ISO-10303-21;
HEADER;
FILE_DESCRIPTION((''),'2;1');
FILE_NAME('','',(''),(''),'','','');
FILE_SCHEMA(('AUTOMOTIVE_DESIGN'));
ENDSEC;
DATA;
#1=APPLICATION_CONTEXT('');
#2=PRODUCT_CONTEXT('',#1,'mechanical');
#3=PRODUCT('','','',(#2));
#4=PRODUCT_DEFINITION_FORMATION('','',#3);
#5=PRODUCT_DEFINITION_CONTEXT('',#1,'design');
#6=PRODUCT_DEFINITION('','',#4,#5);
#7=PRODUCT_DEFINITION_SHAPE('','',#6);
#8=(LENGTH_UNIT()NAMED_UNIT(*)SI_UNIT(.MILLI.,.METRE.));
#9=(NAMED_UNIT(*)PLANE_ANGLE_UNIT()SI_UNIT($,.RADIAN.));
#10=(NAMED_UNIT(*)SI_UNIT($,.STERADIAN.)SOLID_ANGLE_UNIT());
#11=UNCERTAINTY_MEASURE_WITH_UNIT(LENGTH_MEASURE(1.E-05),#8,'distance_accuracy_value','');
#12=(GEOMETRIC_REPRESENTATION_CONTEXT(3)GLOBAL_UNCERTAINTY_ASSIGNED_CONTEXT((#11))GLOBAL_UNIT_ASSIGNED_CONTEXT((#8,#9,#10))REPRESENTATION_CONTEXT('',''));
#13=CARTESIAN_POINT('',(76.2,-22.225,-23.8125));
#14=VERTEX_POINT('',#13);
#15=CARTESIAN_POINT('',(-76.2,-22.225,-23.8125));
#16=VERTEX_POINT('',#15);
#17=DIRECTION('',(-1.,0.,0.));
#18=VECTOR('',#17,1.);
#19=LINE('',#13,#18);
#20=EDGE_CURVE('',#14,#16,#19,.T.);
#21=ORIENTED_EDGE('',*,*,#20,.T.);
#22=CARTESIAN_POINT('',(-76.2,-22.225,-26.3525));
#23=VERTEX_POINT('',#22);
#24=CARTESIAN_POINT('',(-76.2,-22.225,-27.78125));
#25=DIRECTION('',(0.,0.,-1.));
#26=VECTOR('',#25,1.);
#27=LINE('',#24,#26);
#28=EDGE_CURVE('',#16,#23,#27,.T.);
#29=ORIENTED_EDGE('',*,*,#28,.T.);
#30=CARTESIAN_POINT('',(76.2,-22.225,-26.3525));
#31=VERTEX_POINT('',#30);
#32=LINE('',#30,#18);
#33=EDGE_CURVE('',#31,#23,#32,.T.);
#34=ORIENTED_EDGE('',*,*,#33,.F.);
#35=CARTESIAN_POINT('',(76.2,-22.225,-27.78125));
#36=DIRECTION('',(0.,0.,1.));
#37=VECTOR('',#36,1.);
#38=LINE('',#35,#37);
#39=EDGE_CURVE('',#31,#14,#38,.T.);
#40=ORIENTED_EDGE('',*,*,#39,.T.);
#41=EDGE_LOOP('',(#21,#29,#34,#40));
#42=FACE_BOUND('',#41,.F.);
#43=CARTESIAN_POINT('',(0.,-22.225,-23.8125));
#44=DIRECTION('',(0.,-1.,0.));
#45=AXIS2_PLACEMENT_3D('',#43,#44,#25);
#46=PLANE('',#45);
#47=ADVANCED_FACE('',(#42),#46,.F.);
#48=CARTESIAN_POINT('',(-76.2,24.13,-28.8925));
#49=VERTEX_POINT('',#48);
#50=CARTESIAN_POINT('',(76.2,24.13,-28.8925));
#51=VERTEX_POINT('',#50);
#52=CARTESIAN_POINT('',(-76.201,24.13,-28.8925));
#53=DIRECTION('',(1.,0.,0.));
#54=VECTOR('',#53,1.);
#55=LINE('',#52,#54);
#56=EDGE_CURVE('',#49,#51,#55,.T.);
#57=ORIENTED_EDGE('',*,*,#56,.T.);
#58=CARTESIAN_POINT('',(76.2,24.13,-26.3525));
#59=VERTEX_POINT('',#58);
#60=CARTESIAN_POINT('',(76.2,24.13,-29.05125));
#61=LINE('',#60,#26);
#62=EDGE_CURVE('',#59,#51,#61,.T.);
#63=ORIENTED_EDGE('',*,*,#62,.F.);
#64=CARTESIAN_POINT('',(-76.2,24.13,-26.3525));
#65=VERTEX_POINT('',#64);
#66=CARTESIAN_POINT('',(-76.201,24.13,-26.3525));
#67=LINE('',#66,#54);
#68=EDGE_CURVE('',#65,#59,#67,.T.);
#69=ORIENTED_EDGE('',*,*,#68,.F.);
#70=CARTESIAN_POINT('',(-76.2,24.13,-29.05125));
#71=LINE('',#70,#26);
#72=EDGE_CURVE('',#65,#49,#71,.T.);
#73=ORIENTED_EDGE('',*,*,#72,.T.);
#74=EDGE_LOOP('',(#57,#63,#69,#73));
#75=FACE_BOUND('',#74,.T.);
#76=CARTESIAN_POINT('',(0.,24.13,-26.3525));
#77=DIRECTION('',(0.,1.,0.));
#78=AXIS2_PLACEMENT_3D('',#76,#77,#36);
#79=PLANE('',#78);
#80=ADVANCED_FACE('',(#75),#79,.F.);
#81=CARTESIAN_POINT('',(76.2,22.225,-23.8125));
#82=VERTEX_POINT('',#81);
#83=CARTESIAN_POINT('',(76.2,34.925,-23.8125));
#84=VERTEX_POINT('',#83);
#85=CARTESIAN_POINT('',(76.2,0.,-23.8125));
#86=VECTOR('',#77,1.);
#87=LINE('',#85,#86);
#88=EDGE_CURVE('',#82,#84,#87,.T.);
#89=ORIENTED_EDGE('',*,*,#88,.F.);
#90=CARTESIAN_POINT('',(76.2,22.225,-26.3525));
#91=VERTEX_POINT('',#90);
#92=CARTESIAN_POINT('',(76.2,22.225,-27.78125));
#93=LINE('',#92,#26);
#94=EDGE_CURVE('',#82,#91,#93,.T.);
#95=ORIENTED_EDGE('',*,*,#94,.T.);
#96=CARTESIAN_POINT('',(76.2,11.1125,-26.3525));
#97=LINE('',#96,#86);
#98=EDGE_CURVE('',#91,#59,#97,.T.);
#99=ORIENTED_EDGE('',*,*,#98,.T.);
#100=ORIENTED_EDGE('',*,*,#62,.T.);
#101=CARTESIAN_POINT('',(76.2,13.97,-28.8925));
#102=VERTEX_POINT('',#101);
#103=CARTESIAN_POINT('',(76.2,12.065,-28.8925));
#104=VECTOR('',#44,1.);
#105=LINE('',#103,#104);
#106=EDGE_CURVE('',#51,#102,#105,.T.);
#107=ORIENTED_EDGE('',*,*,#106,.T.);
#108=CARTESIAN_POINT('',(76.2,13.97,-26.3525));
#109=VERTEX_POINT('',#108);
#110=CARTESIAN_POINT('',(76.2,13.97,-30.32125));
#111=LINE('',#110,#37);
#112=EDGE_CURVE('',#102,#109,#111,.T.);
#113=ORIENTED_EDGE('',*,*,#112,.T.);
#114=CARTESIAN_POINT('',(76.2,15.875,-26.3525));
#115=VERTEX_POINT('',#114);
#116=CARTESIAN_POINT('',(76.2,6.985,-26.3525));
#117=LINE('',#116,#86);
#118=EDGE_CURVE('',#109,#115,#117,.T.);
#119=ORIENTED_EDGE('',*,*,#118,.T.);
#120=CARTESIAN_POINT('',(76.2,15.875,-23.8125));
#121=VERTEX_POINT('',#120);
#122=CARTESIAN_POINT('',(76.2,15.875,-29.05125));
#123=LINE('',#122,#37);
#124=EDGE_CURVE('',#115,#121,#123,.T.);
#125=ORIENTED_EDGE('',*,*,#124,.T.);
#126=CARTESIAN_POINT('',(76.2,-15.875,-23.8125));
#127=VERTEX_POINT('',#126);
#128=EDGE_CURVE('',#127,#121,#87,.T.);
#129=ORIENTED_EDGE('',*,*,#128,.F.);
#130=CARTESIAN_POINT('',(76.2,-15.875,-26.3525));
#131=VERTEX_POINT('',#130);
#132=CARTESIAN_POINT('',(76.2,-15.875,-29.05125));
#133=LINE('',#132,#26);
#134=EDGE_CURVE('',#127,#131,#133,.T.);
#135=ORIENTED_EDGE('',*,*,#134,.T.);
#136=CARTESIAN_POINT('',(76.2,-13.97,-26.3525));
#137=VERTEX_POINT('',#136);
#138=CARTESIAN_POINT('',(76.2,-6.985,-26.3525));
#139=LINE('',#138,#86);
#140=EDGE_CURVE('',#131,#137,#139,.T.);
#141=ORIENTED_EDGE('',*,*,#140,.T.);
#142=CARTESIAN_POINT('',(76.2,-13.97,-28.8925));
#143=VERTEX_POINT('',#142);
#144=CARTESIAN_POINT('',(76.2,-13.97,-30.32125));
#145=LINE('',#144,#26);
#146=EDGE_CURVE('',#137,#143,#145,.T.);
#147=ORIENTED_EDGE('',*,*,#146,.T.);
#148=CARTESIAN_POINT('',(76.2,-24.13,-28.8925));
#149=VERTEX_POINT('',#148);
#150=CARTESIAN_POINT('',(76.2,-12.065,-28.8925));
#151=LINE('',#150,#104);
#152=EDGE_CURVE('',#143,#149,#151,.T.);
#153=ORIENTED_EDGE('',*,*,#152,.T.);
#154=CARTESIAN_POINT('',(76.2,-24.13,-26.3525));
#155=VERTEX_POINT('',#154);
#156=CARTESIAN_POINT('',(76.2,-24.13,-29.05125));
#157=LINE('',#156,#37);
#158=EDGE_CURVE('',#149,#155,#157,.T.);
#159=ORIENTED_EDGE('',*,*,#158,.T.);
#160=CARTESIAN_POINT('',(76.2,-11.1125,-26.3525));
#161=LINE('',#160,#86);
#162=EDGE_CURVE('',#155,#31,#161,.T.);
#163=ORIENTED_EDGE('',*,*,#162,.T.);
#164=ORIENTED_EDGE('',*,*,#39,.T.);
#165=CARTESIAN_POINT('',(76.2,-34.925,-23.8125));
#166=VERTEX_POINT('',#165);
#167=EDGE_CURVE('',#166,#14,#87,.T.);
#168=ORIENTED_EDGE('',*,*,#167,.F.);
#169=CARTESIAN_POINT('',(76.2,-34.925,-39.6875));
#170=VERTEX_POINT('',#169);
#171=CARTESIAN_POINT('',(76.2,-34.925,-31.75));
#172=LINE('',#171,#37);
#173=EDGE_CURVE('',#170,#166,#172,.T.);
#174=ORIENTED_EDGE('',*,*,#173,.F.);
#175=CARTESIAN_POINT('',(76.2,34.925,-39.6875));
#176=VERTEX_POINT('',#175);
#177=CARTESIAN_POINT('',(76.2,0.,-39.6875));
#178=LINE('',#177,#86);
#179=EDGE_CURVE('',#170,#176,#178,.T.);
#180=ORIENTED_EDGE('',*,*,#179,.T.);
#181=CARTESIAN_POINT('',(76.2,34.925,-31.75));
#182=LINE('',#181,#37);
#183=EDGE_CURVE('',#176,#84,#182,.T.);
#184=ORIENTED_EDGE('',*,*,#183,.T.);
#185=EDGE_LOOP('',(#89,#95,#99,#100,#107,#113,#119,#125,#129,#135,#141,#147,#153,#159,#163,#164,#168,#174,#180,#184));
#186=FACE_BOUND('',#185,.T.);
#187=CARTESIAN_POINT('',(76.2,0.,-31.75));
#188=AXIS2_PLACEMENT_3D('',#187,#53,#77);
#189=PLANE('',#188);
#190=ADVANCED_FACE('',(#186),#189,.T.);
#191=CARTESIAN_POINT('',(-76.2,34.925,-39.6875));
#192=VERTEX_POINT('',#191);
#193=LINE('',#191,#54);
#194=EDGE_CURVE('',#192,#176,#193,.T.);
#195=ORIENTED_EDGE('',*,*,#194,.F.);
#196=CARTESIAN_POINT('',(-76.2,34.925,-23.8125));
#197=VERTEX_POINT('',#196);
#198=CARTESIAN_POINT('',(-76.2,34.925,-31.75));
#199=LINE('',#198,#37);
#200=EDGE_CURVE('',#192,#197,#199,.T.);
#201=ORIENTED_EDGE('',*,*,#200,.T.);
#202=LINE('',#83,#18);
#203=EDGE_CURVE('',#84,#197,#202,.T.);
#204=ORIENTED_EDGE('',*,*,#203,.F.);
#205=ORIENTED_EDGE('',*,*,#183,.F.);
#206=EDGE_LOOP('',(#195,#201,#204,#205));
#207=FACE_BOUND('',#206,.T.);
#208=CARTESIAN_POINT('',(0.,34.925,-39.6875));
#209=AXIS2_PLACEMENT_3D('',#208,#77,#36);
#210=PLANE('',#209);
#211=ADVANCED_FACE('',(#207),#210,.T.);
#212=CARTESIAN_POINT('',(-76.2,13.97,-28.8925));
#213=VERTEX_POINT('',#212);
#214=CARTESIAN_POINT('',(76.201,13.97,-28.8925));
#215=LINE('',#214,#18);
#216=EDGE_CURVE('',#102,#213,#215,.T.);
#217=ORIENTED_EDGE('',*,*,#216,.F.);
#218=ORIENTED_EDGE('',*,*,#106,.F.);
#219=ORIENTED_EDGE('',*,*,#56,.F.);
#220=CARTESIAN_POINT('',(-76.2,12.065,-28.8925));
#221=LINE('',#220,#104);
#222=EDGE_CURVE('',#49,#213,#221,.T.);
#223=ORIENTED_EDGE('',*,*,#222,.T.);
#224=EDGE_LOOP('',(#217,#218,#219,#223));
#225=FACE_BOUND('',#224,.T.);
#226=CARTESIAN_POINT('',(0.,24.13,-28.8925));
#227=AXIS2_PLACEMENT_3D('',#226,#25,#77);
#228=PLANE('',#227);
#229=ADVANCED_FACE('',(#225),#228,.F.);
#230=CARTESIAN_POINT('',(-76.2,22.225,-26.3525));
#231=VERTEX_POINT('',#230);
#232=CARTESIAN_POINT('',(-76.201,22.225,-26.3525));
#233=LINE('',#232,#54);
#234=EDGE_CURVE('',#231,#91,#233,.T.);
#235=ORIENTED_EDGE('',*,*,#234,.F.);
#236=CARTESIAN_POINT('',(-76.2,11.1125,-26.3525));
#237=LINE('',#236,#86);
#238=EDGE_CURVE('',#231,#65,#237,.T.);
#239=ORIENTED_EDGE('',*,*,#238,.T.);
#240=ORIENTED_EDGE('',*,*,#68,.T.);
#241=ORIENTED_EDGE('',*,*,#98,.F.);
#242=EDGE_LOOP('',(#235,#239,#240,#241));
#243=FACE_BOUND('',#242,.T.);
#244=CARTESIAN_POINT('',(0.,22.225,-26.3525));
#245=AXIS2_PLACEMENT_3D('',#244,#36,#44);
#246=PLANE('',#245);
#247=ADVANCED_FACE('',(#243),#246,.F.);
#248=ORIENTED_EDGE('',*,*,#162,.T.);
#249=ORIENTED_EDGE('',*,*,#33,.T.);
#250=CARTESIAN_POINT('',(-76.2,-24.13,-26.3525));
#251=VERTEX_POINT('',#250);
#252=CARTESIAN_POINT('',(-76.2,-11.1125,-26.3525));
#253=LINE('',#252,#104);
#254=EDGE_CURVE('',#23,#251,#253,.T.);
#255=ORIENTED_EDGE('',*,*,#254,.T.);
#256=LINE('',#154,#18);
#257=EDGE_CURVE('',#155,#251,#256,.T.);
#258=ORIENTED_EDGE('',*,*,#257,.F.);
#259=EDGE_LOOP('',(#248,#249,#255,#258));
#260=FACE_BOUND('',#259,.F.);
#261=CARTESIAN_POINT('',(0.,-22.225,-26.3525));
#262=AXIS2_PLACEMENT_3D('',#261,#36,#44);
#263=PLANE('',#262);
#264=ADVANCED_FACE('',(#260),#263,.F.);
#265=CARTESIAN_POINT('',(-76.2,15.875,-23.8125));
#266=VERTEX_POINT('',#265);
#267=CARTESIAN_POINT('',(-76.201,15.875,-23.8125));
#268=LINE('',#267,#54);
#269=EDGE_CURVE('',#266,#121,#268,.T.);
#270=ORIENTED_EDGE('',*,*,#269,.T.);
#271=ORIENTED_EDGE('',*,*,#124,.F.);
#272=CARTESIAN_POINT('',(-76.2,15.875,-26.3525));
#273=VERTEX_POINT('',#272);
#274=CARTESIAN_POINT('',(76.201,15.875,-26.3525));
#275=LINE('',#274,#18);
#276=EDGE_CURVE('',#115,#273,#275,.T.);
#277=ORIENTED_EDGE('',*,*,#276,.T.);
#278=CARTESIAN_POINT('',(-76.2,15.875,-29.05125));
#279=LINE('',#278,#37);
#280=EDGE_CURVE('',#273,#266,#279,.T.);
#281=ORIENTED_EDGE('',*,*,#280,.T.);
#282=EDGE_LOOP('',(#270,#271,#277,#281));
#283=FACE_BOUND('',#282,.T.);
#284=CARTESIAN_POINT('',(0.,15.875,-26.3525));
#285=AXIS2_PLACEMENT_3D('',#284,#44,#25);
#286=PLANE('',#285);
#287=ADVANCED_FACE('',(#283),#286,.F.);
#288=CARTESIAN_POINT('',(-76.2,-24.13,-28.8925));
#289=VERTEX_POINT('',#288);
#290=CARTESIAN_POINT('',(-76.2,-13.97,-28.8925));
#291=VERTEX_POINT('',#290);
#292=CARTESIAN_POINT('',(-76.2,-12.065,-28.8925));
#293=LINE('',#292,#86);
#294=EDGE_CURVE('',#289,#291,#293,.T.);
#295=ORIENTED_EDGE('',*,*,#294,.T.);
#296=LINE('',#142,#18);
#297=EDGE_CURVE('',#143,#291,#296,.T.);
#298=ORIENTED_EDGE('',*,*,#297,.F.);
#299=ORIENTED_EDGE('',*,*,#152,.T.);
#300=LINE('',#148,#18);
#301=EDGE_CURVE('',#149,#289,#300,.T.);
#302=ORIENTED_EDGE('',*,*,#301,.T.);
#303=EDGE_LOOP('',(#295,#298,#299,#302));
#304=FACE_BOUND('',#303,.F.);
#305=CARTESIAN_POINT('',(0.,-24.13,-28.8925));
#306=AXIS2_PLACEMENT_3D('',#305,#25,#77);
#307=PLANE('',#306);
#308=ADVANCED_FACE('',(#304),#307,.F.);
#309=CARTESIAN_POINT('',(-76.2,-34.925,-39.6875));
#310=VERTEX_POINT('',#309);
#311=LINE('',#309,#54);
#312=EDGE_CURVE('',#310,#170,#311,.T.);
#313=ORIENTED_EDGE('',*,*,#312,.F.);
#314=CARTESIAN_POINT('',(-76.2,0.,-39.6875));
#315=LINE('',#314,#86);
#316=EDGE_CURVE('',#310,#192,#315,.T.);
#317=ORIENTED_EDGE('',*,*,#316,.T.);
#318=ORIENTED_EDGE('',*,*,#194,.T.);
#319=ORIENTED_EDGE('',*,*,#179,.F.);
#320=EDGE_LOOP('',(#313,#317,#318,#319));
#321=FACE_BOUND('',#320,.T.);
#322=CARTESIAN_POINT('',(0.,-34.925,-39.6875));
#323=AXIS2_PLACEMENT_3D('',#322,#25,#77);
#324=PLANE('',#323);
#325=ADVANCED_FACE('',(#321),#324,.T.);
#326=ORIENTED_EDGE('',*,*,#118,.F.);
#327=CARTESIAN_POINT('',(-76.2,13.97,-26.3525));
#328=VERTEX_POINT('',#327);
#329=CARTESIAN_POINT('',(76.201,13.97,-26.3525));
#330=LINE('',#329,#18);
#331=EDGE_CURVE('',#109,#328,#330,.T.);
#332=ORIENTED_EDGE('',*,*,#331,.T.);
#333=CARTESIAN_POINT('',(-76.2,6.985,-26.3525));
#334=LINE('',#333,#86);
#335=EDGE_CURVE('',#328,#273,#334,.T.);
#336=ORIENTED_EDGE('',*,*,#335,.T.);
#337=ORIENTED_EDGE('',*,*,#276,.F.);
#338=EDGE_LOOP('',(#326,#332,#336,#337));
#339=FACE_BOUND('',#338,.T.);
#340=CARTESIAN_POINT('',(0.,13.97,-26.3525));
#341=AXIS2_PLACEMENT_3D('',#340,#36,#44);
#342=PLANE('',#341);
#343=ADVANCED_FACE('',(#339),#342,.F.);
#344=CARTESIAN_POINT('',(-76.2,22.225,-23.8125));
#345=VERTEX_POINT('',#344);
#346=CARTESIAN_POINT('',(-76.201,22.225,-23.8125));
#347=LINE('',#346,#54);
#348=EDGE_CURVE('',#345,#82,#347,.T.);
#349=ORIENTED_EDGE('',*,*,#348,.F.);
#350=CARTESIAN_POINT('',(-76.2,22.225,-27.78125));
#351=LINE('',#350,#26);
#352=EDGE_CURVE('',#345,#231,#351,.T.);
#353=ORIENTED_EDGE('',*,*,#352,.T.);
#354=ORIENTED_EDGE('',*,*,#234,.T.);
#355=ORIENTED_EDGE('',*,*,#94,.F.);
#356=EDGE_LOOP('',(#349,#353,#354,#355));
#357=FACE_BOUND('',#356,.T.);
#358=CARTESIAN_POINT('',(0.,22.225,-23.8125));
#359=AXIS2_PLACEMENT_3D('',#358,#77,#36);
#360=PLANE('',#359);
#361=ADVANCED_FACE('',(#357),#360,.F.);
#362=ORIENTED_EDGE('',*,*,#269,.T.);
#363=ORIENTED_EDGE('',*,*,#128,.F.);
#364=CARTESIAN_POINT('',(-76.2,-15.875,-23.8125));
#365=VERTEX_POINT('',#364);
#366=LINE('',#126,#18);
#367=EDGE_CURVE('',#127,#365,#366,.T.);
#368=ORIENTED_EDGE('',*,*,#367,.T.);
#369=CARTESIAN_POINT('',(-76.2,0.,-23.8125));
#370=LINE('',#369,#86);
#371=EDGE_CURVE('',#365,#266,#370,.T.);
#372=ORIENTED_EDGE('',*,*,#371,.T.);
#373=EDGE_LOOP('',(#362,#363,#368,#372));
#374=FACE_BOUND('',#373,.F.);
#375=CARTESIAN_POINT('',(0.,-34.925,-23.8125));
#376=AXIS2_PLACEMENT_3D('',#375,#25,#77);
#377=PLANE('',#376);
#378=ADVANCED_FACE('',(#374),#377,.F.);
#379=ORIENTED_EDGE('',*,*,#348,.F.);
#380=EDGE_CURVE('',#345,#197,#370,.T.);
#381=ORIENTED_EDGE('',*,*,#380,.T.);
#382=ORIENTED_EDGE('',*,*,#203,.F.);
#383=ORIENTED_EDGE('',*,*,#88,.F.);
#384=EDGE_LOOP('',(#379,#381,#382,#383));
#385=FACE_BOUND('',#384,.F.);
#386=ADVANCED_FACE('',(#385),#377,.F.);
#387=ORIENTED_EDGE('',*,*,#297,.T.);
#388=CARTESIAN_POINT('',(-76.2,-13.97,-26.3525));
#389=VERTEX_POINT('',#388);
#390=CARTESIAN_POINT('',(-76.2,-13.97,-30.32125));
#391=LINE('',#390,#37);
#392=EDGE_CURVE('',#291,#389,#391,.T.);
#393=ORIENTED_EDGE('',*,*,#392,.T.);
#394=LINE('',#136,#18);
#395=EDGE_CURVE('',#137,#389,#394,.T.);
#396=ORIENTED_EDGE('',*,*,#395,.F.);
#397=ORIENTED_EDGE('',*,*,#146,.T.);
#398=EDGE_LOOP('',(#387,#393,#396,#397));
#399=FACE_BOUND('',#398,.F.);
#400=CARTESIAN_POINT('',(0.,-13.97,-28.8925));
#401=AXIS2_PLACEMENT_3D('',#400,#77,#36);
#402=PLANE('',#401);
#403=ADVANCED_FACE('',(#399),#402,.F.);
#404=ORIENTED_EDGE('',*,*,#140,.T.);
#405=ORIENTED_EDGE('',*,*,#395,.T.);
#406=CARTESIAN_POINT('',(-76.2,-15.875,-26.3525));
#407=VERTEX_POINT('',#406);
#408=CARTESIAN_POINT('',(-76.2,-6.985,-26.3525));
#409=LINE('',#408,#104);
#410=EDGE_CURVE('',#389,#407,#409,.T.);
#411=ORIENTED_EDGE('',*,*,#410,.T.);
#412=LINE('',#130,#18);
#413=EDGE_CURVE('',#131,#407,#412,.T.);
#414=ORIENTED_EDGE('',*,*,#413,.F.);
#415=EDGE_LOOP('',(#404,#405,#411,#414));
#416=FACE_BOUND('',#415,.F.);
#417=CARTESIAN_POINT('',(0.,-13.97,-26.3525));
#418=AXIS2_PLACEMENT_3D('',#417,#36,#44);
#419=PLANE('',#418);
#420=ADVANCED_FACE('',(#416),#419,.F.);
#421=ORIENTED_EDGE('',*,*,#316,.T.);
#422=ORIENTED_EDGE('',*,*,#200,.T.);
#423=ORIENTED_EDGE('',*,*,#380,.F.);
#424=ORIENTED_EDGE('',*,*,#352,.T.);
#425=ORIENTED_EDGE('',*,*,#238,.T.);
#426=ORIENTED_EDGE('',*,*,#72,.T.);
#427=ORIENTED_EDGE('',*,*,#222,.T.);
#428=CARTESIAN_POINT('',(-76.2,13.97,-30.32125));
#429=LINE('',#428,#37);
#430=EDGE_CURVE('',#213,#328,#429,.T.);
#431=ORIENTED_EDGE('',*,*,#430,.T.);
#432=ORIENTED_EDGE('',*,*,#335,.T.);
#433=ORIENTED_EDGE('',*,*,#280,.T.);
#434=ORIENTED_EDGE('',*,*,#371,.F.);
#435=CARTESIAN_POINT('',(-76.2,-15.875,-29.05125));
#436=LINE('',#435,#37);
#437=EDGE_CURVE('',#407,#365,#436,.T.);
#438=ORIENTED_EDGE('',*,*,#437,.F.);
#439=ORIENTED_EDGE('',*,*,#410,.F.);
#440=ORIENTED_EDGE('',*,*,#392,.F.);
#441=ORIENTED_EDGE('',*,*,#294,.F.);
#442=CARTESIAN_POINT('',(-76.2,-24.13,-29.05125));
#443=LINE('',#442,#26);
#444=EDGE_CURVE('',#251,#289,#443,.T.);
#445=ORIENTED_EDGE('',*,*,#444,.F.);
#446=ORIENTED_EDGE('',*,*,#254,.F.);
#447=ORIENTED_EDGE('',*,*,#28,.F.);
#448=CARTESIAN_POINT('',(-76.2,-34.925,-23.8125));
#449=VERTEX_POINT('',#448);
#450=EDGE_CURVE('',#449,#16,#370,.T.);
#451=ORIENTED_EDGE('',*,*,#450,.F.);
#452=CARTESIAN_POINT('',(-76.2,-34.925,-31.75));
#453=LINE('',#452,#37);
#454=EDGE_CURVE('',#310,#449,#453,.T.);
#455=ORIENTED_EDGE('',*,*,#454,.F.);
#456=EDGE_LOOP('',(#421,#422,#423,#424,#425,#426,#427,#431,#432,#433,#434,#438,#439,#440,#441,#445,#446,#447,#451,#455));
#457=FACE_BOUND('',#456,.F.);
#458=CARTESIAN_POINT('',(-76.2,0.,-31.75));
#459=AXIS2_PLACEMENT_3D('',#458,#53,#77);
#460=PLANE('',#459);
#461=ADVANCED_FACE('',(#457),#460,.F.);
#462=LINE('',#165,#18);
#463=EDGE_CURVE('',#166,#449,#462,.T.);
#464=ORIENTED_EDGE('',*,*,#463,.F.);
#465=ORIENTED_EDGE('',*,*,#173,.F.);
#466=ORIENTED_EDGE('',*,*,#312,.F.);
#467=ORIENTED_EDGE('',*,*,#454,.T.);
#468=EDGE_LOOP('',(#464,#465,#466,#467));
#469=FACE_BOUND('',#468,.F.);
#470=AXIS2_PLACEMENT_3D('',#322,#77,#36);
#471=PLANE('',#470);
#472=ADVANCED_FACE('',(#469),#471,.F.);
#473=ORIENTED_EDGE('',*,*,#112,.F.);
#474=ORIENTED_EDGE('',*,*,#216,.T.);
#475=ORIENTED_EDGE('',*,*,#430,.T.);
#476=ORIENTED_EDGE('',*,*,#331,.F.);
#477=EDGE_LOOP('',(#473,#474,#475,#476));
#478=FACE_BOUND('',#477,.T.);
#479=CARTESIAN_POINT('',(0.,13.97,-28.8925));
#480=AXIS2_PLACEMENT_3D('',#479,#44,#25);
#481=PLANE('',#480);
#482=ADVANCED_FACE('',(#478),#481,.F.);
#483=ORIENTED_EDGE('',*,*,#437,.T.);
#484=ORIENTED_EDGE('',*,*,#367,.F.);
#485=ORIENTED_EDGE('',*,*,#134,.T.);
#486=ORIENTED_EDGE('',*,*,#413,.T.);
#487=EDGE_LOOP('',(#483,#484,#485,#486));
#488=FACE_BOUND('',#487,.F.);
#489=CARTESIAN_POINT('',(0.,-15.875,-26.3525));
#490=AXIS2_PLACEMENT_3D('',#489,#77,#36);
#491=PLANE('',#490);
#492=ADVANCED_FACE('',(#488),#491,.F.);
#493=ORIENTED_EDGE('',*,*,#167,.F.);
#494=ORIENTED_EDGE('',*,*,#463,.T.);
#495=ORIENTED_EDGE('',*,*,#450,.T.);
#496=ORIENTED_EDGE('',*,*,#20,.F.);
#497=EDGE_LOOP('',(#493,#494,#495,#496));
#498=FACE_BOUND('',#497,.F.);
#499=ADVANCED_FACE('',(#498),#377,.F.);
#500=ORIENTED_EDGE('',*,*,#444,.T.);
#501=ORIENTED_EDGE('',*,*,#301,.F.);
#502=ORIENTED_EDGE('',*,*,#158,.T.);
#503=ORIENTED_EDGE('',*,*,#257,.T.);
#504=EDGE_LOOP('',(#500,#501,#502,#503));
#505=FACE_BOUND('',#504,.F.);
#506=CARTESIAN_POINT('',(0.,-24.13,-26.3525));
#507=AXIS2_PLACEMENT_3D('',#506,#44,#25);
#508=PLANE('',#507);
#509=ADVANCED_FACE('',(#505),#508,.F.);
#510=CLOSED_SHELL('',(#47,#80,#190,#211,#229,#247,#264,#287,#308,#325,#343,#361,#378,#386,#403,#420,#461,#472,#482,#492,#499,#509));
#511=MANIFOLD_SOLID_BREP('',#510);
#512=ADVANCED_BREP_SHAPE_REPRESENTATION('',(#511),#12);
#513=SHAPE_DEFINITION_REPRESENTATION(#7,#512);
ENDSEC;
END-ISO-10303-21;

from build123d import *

# Parameters (mm, degrees)
F0_W          = 69.85
F0_H          = 15.875
F1_DEPTH      = 76.2
F1_DEPTH_BACK = 76.2
F3_DEPTH      = 76.201
F3_DEPTH_BACK = 76.201


# Not quite as in the source:
# - a pattern or mirror of a feature is missing from the dataset's text; its kind, count and spacing are read off the source's solid


with BuildPart() as f1:
    # F0 (on Right) → F1 (new body, two sides)
    with BuildSketch(Plane.YZ) as f1_sk:
        with Locations((0, -31.75)):
            Rectangle(F0_W, F0_H)
    extrude(amount=F1_DEPTH)
    extrude(f1_sk.sketch, amount=-F1_DEPTH_BACK)

    # F2 (on Right) → F3 (cut, two sides)
    with BuildSketch(Plane.YZ) as f3_sk:
        Polygon((-15.875, -26.3525), (-15.875, -23.8125), (-22.225, -23.8125), (-22.225, -26.3525), (-24.13, -26.3525), (-24.13, -28.8925), (-13.97, -28.8925), (-13.97, -26.3525), align=None)
    f3 = extrude(amount=-F3_DEPTH, mode=Mode.SUBTRACT) + extrude(f3_sk.sketch, amount=F3_DEPTH_BACK, mode=Mode.SUBTRACT)

    # F3_copies: F3 across plane
    add(f3.mirror(Plane.ZX), mode=Mode.SUBTRACT)


solid = f1.part
